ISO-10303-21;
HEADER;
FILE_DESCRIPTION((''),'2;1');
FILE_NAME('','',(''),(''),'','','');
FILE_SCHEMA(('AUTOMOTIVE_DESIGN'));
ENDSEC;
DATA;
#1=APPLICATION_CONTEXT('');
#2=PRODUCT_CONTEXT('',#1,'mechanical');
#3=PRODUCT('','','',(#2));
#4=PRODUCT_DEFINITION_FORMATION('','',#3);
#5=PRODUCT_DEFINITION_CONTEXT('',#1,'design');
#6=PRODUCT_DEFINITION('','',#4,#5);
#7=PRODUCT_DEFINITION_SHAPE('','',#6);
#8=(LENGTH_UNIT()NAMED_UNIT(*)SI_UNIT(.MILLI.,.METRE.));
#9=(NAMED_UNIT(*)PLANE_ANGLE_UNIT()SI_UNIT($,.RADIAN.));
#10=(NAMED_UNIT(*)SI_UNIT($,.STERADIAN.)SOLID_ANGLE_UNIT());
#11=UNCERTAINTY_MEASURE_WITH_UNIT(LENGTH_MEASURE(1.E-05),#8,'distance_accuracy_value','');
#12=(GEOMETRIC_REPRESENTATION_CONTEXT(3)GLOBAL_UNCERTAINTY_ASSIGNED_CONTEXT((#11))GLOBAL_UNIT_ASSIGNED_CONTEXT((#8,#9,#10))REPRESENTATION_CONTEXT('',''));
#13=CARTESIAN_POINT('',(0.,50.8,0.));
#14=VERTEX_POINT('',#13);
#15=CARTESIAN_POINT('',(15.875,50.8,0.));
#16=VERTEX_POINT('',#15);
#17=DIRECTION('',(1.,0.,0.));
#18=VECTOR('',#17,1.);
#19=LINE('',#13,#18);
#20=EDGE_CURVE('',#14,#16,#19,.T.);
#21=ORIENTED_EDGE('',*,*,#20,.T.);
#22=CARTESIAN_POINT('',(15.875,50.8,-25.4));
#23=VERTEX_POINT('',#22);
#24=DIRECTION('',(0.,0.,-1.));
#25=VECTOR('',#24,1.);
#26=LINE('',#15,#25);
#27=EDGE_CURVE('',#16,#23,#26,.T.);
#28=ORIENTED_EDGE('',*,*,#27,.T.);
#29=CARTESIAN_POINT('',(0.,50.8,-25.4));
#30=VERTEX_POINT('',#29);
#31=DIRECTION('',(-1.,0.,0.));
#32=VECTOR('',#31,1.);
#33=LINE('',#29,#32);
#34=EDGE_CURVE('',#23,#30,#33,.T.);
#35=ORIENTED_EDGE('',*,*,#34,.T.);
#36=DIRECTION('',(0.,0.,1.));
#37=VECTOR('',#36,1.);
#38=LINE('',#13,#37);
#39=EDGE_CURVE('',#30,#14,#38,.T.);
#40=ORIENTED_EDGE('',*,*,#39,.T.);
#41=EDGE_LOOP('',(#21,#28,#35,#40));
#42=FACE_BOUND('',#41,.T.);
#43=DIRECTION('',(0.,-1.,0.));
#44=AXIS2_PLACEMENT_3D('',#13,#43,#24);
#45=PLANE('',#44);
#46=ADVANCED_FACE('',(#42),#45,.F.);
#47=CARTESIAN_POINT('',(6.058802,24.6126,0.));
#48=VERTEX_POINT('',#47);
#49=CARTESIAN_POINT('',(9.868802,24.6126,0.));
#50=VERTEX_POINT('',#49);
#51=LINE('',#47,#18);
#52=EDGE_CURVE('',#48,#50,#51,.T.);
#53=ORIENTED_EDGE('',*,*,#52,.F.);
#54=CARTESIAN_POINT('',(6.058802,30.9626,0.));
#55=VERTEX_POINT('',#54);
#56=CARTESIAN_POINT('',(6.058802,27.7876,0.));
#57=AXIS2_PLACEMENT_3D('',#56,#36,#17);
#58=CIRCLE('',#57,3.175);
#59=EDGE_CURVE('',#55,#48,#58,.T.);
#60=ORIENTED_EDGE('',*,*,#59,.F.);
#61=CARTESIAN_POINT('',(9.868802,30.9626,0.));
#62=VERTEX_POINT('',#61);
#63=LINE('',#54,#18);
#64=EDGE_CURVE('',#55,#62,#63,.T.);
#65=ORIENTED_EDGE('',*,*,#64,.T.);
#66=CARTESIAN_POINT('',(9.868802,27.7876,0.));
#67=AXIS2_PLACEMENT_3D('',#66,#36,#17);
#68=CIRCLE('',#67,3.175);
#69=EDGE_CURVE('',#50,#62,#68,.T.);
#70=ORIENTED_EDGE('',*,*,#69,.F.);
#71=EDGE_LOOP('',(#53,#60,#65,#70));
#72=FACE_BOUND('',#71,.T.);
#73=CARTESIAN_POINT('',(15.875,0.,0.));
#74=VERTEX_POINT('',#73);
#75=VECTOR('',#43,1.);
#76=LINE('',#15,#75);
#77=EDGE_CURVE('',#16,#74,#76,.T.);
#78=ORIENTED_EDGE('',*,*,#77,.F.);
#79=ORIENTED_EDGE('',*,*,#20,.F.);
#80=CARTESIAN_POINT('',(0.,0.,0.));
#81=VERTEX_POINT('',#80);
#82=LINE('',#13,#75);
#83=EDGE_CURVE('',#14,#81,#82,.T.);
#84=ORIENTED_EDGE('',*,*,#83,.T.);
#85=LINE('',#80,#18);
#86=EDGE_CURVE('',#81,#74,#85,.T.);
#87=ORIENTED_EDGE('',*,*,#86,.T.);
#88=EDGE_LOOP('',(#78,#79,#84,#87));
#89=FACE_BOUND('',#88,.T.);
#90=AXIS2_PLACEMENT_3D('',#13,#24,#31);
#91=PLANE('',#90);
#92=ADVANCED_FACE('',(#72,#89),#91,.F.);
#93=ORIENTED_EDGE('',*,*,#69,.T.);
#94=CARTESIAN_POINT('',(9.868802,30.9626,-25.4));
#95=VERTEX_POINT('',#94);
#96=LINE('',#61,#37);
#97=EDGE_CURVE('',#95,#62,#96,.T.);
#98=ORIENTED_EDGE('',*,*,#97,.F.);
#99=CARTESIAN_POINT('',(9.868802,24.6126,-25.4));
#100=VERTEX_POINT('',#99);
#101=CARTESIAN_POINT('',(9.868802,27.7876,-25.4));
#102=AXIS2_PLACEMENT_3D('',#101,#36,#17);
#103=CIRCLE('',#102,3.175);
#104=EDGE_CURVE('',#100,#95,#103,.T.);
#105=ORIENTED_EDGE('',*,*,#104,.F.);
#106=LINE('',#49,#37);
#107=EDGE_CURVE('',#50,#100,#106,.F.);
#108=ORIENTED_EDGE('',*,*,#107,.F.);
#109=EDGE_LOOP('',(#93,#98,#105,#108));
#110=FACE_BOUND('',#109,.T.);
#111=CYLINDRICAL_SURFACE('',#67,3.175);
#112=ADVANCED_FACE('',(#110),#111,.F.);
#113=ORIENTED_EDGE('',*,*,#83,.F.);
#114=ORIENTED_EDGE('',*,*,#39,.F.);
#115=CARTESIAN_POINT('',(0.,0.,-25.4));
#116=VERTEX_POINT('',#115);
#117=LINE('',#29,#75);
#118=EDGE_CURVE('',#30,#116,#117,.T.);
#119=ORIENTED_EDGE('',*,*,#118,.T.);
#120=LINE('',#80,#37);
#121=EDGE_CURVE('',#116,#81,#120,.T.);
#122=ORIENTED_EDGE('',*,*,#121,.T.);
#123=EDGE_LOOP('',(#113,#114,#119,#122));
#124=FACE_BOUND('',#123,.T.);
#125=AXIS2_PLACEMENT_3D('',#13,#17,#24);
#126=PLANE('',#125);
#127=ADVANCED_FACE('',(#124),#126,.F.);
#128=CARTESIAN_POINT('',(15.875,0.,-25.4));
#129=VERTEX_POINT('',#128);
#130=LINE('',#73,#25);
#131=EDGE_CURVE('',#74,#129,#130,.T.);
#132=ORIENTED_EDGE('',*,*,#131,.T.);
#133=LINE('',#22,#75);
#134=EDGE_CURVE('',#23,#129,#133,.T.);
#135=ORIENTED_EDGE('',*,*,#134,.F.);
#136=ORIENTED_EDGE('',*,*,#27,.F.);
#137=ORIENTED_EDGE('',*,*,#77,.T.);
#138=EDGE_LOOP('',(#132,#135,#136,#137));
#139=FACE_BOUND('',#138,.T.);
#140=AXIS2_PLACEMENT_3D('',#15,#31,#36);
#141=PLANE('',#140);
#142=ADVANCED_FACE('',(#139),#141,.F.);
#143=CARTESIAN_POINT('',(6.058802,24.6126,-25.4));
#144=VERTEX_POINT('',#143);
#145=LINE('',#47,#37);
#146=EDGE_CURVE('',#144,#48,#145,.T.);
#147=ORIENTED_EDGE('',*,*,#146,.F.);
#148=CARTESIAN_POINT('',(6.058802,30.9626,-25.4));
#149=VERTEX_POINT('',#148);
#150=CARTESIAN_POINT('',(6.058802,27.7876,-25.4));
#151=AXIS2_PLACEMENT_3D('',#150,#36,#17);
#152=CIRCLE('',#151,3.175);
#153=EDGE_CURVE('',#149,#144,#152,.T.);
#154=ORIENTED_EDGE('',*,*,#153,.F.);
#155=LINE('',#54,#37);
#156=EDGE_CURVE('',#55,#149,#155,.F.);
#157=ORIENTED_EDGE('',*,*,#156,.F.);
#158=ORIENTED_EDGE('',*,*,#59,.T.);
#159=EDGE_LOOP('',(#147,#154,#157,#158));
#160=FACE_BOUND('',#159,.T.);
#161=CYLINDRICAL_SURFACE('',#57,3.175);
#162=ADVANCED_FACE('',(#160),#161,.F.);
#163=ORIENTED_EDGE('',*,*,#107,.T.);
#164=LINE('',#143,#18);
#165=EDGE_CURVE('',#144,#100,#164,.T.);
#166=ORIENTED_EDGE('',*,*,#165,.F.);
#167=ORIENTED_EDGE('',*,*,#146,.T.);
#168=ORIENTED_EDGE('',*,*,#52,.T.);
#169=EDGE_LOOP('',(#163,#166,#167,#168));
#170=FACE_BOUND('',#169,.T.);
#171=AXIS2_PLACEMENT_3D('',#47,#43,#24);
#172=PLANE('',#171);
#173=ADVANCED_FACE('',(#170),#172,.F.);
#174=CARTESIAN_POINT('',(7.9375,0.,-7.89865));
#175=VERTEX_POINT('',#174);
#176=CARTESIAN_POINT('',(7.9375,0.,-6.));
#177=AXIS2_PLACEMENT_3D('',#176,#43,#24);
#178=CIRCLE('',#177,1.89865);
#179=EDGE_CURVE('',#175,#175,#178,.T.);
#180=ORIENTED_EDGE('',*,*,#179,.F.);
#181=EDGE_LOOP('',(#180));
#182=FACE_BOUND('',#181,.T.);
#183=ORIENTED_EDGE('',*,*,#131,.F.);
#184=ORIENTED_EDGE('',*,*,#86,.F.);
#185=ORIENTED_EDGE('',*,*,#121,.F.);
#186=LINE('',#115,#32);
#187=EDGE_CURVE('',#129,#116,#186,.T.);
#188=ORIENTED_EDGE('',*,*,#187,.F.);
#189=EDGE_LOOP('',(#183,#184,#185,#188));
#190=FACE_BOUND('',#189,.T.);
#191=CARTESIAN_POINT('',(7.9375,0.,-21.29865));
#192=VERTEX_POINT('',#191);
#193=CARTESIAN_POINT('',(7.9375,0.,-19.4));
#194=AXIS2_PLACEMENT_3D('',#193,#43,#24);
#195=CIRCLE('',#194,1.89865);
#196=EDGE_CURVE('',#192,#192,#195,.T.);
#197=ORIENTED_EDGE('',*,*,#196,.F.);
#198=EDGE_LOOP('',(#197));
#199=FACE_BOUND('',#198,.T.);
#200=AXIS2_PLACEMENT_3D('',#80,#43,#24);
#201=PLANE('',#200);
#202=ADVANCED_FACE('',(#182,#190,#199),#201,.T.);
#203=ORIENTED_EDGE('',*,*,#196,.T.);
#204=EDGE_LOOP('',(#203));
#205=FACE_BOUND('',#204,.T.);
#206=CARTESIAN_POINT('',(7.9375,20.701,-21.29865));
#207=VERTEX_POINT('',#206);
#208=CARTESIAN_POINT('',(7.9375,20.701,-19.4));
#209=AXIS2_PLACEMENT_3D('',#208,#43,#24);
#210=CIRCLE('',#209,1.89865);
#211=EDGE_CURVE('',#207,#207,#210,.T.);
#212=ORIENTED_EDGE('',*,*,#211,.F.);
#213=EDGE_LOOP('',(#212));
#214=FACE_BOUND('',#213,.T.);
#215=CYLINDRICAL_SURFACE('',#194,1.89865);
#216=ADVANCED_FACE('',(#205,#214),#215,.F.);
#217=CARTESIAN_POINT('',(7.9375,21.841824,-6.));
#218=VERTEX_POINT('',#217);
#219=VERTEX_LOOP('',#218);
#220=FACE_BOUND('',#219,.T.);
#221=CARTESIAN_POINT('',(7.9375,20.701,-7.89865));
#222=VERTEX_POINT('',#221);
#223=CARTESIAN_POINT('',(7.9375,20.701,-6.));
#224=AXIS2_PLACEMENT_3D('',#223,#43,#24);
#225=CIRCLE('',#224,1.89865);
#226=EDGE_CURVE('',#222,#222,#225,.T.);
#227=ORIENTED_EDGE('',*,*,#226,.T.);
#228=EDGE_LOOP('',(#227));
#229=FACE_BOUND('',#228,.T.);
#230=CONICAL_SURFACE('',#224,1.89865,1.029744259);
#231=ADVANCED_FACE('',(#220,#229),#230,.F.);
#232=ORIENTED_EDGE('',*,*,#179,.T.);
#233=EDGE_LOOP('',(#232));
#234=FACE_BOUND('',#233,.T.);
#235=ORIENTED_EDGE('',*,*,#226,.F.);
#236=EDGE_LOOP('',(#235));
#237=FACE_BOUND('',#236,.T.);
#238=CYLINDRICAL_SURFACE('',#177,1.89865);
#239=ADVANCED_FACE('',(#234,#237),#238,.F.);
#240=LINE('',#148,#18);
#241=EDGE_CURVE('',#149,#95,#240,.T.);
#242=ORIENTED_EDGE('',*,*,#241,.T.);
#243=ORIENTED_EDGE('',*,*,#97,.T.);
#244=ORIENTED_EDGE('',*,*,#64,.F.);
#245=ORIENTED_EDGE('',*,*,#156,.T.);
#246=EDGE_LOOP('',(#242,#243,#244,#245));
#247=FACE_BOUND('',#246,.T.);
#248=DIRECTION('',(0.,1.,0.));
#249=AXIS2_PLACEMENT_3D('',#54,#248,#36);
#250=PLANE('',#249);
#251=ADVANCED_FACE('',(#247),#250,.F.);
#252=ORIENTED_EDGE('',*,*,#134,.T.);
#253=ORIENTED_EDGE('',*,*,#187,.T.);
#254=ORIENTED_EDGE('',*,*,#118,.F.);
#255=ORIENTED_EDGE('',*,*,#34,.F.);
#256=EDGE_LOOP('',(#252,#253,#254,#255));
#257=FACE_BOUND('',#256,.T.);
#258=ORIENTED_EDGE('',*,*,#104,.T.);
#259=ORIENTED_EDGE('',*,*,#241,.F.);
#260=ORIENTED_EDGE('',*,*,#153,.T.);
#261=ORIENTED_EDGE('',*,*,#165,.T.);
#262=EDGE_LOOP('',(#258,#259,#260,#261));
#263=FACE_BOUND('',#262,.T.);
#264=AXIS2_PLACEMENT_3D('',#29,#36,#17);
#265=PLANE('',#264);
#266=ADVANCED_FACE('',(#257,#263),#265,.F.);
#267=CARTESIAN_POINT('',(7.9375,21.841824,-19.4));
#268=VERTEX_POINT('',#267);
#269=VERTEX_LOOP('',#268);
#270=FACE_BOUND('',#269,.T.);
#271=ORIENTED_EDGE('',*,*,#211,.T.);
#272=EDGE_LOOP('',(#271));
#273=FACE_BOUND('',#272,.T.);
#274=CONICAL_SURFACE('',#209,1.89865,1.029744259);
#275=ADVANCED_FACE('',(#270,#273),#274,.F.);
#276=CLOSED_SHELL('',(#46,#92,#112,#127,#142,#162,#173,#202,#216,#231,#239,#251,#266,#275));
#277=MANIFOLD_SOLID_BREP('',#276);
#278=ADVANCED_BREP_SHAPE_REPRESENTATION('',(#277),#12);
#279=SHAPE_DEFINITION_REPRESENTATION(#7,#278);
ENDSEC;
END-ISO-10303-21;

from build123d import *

# Parameters (mm, degrees)
SKETCH1_W                           = 15.875
SKETCH1_H                           = 25.4
BOSS_EXTRUDE1_DEPTH                 = 50.8
TAP_DRILL_FOR_10_24_TAP1_D          = 3.7973
TAP_DRILL_FOR_10_24_TAP1_DEPTH      = 20.701
TAP_DRILL_FOR_10_24_TAP1_TIP        = 1.140824014
TAP_START                           = -25.4
TAP_DRILL_SLOT_FOR_10_24_TAP1_DEPTH = 25.4


# Read off the part's stored shape, not the designer's step: Tap Drill Slot for #10-24 Tap1
with BuildPart() as part:
    # Sketch1 → Boss-Extrude1 (new body)
    with BuildSketch(Plane(origin=(0, 0, 0), x_dir=(1, 0, 0), z_dir=(0, 1, 0))):
        with Locations((7.9375, 12.7)):
            Rectangle(SKETCH1_W, SKETCH1_H)
    extrude(amount=BOSS_EXTRUDE1_DEPTH)

    # Tap Drill for #10-24 Tap1
    with Locations(Plane(origin=(0, 0, 0), x_dir=(-1, 0, 0), z_dir=(0, -1, 0))):
        with Locations((-7.9375, 6), (-7.9375, 19.4)):
            Hole(TAP_DRILL_FOR_10_24_TAP1_D / 2, depth=TAP_DRILL_FOR_10_24_TAP1_DEPTH)
            with Locations((0, 0, -(TAP_DRILL_FOR_10_24_TAP1_DEPTH + TAP_DRILL_FOR_10_24_TAP1_TIP / 2))):  # 118° drill point
                Cone(0, TAP_DRILL_FOR_10_24_TAP1_D / 2, TAP_DRILL_FOR_10_24_TAP1_TIP, mode=Mode.SUBTRACT)

    # Tap Drill Slot for #10-24 Tap1 outline → Tap Drill Slot for #10-24 Tap1 (cut)
    with BuildSketch(Plane.XY.offset(TAP_START)):
        with BuildLine():
            Line((6.058801855, 24.6126), (9.868801855, 24.6126))
            ThreePointArc((9.868801855, 24.6126), (13.043801855, 27.7876), (9.868801855, 30.9626))
            Line((9.868801855, 30.9626), (6.058801855, 30.9626))
            ThreePointArc((6.058801855, 30.9626), (2.883801855, 27.7876), (6.058801855, 24.6126))
        make_face()
    extrude(amount=TAP_DRILL_SLOT_FOR_10_24_TAP1_DEPTH, mode=Mode.SUBTRACT)


solid = part.part
